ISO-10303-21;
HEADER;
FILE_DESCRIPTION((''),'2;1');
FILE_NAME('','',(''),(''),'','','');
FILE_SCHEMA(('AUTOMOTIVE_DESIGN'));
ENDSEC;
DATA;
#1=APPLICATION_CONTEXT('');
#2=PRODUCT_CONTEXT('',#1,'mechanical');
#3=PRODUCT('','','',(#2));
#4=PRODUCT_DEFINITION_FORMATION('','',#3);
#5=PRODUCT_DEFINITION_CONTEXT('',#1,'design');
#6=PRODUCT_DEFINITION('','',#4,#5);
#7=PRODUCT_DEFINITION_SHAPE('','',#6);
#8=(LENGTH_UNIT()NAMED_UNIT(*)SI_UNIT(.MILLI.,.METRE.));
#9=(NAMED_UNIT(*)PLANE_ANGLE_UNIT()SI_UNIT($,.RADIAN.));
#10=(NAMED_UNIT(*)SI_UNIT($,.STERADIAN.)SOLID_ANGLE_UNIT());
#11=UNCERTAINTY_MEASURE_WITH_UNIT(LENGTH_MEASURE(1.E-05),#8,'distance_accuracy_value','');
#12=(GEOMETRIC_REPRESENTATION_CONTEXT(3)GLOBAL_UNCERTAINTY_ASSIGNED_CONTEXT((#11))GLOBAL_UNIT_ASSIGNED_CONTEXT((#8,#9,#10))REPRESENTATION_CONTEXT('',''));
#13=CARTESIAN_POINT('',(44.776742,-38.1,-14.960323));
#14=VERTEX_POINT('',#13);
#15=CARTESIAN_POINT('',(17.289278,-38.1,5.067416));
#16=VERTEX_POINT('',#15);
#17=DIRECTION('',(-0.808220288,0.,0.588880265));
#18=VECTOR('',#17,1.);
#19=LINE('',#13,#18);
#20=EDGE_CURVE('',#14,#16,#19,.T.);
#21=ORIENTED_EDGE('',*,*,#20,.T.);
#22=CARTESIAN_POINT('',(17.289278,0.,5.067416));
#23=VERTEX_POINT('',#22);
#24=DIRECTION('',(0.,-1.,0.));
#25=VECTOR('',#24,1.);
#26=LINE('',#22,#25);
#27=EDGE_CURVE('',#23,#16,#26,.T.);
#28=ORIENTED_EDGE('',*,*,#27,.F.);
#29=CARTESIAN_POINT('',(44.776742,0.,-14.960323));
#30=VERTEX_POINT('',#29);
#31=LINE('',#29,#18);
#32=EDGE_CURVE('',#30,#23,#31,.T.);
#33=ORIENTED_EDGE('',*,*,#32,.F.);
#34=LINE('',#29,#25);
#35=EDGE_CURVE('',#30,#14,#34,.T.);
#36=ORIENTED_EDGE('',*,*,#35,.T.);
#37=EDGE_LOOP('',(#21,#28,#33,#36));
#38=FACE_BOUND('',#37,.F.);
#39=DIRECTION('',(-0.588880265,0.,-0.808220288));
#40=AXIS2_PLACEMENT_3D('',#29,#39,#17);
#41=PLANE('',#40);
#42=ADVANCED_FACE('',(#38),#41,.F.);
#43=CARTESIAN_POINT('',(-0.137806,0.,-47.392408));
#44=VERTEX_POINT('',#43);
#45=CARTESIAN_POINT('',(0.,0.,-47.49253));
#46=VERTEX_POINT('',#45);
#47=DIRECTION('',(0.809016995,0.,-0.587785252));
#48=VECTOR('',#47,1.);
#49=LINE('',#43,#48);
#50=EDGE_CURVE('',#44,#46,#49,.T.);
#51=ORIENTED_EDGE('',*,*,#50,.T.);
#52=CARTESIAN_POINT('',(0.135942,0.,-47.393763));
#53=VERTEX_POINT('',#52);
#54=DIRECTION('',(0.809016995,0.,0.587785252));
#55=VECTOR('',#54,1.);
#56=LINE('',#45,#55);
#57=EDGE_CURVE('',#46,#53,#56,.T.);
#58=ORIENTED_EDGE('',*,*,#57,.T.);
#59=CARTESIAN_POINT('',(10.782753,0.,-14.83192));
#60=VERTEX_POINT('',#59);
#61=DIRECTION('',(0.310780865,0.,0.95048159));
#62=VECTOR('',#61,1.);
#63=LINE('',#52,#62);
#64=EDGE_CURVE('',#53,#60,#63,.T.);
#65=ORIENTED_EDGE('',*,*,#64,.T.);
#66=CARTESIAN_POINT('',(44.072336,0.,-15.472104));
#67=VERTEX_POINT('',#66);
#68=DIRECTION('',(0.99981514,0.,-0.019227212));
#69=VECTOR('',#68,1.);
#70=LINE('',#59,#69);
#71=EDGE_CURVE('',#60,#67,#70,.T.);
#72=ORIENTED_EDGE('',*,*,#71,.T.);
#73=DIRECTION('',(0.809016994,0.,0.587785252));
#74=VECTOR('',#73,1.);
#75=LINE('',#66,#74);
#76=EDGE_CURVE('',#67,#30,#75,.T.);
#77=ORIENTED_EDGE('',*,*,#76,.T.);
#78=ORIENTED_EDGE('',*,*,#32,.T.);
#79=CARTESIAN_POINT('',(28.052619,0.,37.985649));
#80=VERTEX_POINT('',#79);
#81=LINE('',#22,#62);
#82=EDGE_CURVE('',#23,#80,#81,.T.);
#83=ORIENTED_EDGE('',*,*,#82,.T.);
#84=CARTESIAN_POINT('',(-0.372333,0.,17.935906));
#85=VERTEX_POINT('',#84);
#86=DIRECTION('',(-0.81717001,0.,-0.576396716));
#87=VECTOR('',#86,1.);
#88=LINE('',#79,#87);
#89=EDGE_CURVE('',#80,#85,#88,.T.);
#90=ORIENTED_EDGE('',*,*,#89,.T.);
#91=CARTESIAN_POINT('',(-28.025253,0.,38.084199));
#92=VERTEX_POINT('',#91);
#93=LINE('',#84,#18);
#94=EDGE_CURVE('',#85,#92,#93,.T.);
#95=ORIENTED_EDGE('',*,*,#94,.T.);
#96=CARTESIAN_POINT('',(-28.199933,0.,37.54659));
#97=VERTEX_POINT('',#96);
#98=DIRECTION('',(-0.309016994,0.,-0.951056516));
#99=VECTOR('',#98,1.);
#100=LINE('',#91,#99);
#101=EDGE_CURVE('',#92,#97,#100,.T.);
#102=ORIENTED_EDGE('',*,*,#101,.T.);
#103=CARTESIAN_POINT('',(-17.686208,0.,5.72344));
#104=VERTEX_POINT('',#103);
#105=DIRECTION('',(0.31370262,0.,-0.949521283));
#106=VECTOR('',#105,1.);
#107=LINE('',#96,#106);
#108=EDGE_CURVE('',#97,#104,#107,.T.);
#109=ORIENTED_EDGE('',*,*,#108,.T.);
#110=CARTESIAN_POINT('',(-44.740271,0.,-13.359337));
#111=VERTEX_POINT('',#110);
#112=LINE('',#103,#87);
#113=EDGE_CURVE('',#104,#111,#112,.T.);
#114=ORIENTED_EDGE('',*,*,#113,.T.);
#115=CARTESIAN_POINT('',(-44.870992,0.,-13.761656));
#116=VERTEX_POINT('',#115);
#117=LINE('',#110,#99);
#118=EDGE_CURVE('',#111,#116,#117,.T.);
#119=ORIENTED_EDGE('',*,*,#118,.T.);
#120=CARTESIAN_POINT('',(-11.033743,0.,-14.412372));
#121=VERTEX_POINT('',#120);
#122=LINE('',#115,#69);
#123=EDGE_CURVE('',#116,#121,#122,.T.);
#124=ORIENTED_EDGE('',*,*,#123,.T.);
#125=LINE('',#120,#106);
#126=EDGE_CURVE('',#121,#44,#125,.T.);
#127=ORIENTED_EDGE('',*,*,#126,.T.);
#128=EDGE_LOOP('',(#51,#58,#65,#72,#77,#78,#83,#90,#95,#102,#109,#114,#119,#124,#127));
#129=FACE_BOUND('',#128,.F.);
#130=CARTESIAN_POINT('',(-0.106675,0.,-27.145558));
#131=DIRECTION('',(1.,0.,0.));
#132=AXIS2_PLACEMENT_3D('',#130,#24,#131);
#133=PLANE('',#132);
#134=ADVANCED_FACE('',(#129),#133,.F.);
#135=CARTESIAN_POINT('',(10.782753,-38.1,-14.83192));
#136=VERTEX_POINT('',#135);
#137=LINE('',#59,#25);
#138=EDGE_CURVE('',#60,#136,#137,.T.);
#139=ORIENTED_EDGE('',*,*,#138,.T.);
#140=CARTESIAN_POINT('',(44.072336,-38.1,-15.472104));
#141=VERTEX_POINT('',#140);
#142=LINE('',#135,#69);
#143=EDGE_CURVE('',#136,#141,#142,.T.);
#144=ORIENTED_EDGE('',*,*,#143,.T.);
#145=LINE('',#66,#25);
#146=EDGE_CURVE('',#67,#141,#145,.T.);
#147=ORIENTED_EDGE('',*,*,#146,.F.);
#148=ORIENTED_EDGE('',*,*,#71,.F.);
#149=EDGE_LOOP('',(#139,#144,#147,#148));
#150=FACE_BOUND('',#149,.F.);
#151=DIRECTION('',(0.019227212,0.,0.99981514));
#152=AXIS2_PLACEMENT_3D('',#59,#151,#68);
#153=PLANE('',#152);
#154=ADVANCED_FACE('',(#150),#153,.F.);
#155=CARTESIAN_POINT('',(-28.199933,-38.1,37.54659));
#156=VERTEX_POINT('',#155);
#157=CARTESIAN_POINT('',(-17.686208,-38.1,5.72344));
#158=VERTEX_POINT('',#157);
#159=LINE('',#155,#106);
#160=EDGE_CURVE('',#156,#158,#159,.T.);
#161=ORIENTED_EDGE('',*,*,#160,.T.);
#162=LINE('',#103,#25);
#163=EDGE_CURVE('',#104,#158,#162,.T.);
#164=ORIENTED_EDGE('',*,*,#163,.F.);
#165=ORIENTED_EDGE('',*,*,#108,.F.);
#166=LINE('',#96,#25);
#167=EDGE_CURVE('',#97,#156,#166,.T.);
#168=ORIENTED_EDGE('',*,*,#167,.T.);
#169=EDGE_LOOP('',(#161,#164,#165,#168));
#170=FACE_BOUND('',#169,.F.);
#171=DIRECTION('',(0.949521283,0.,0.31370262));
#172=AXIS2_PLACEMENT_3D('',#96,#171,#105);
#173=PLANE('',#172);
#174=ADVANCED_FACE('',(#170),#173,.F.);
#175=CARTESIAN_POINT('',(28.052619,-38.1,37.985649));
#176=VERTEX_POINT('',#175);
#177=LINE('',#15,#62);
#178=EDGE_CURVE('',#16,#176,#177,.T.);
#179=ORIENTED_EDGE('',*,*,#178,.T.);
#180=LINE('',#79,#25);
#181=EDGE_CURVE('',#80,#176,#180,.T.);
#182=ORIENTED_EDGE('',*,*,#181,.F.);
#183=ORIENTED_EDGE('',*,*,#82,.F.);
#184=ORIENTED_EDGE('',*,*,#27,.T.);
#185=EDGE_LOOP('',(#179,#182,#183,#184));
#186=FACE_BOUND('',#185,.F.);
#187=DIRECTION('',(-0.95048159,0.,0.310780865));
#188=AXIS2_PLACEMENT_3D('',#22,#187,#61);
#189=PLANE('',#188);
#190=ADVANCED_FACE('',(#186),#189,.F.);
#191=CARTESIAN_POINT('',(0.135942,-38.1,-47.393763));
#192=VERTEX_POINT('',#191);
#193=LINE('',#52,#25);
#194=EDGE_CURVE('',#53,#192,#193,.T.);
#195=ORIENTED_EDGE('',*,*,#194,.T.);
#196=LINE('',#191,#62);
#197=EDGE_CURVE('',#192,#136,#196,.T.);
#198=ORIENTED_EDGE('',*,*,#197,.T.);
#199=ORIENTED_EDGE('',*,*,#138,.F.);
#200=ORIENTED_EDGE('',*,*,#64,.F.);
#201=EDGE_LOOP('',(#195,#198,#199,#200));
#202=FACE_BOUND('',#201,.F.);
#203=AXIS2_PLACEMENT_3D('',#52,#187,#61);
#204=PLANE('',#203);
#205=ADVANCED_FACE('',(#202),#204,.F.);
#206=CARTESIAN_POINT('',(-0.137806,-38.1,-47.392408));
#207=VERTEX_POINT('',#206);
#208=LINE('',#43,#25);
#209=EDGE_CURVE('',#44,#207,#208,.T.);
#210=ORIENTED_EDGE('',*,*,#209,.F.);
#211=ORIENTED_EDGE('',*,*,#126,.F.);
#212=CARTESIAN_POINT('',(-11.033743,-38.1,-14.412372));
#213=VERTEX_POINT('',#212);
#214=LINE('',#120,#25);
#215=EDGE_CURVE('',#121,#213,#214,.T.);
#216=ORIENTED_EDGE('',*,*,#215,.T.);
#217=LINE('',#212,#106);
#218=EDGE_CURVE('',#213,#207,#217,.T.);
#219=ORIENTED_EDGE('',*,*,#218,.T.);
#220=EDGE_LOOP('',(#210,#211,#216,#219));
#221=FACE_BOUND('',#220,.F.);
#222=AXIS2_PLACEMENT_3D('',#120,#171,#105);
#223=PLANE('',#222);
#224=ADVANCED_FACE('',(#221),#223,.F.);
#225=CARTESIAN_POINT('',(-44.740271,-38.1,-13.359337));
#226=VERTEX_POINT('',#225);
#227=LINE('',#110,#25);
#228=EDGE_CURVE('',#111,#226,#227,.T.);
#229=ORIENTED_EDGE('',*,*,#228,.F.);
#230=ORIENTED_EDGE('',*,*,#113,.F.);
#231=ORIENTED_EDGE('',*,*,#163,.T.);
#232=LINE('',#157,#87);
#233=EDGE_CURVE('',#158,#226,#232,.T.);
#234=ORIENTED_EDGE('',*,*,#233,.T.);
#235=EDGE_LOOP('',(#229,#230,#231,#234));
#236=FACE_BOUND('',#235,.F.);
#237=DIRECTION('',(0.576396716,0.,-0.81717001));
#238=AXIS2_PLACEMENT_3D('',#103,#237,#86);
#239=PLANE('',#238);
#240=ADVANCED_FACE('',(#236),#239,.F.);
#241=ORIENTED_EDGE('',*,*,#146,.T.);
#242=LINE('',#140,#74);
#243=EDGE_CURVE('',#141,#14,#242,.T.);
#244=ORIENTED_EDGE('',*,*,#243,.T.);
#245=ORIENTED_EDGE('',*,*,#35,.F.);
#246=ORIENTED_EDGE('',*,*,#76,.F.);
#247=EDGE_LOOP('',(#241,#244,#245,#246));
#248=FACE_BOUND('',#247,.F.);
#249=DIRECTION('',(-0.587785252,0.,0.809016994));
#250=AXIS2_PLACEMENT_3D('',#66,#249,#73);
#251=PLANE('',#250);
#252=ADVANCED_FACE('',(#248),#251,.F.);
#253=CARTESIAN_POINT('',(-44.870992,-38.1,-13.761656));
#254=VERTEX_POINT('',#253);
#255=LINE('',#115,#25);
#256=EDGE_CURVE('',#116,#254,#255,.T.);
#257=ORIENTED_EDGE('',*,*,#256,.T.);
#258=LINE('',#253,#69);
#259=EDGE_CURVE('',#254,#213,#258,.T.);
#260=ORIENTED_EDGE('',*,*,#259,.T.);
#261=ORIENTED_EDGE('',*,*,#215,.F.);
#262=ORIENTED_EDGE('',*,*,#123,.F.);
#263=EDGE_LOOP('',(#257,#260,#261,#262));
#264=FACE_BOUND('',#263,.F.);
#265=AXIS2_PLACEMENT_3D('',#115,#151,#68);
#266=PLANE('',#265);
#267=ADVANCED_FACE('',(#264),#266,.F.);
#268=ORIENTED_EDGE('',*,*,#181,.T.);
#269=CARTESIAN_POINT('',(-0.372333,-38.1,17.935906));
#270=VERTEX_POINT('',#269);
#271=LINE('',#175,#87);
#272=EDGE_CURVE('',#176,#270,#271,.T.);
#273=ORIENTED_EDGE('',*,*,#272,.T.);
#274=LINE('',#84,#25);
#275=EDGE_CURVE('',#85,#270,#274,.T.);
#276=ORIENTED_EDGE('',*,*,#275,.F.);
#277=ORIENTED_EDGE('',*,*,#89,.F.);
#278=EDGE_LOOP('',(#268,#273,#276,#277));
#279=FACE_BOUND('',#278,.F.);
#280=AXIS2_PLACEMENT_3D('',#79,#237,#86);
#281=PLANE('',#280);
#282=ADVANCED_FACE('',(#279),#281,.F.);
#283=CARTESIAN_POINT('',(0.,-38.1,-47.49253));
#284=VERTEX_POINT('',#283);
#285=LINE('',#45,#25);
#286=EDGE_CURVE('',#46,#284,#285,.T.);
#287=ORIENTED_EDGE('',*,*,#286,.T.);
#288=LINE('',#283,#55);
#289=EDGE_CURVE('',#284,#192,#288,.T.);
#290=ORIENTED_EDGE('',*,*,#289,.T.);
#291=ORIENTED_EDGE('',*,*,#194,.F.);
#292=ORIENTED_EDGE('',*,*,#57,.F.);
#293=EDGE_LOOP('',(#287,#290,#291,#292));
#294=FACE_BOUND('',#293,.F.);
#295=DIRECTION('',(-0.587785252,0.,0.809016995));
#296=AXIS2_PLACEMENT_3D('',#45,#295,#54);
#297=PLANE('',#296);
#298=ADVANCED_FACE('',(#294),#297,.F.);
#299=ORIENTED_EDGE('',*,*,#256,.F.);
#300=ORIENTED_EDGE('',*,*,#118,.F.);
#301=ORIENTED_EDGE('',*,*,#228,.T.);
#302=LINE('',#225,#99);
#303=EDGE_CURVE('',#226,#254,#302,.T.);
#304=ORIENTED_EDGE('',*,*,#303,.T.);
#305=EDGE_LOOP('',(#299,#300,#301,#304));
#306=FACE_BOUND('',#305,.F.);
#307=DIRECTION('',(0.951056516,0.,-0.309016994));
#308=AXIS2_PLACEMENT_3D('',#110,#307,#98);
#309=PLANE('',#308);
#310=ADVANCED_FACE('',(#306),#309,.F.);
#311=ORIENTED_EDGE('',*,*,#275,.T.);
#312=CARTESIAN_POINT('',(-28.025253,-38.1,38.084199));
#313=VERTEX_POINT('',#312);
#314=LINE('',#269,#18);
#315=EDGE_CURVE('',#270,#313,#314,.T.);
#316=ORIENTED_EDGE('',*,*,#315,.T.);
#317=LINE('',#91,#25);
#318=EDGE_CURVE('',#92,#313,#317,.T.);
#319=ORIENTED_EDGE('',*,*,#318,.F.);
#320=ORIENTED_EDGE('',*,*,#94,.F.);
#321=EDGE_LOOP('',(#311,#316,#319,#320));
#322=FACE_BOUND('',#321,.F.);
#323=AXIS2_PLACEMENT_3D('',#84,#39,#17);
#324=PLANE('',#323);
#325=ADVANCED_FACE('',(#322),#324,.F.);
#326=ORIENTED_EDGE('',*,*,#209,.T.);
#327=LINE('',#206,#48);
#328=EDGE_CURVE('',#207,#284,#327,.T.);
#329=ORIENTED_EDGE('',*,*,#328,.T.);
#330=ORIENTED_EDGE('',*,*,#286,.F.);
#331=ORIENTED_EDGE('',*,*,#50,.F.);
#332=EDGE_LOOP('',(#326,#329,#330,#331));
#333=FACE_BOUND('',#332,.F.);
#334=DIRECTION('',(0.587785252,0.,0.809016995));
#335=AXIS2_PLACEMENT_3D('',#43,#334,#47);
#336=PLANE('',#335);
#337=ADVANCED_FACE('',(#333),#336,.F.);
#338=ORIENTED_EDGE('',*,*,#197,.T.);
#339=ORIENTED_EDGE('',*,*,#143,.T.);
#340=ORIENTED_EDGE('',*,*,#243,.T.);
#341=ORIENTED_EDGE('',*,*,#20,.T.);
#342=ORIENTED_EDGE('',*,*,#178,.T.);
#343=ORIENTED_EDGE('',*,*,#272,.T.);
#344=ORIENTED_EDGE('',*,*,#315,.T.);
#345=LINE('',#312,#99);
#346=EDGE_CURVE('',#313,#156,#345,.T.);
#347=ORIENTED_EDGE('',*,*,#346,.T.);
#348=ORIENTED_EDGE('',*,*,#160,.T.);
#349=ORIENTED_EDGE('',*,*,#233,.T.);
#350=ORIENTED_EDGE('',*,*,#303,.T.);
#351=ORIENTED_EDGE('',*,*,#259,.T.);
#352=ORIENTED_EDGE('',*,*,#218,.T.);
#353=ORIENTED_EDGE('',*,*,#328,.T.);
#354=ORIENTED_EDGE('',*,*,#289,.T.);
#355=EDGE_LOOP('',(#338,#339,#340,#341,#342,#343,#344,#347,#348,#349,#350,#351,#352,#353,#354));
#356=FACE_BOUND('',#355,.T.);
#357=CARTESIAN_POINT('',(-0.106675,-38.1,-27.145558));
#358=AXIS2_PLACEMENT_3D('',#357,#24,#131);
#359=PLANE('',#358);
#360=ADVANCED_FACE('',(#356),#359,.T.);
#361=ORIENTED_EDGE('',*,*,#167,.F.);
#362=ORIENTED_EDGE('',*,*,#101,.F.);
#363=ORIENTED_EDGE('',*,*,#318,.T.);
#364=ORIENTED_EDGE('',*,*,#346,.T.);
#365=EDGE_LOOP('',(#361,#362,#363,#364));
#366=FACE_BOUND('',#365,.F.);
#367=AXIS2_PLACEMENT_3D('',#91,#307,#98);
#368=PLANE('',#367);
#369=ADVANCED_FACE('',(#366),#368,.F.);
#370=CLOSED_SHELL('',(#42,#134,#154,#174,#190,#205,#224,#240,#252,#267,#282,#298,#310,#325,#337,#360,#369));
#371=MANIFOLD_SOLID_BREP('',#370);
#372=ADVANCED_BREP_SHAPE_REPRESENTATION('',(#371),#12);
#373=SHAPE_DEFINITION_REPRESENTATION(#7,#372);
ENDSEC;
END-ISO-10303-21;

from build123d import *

# Parameters (mm, degrees)
F2_DEPTH = 38.1


with BuildPart() as f2:
    # F1 (on face) → F2 (new body)
    with BuildSketch(Plane.XZ):
        Polygon((0.1359417947, -47.3937628545), (10.7827526257, -14.8319200301), (-11.0337428161, -14.4123720925), (-0.1378061081, -47.3924083515), (0, -47.4925303496), align=None)
        Polygon((44.7767423867, -14.9603227402), (17.2892784216, 5.0674163686), (10.7827526257, -14.8319200301), (44.0723355844, -15.472104239), align=None)
        Polygon((-17.6862078163, 5.7234402568), (-0.3723328356, 17.935905908), (-28.025253062, 38.0841986931), (-28.1999326712, 37.5465901356), align=None)
        Polygon((-11.0337428161, -14.4123720925), (-17.6862078163, 5.7234402568), (-44.7402710109, -13.3593368718), (-44.8709923662, -13.7616558351), align=None)
        Polygon((17.2892784216, 5.0674163686), (28.0526187271, 37.9856489599), (-0.3723328356, 17.935905908), align=None)
        Polygon((10.7827526257, -14.8319200301), (17.2892784216, 5.0674163686), (-0.3723328356, 17.935905908), (-17.6862078163, 5.7234402568), (-11.0337428161, -14.4123720925), align=None)
    extrude(amount=F2_DEPTH)


solid = f2.part
